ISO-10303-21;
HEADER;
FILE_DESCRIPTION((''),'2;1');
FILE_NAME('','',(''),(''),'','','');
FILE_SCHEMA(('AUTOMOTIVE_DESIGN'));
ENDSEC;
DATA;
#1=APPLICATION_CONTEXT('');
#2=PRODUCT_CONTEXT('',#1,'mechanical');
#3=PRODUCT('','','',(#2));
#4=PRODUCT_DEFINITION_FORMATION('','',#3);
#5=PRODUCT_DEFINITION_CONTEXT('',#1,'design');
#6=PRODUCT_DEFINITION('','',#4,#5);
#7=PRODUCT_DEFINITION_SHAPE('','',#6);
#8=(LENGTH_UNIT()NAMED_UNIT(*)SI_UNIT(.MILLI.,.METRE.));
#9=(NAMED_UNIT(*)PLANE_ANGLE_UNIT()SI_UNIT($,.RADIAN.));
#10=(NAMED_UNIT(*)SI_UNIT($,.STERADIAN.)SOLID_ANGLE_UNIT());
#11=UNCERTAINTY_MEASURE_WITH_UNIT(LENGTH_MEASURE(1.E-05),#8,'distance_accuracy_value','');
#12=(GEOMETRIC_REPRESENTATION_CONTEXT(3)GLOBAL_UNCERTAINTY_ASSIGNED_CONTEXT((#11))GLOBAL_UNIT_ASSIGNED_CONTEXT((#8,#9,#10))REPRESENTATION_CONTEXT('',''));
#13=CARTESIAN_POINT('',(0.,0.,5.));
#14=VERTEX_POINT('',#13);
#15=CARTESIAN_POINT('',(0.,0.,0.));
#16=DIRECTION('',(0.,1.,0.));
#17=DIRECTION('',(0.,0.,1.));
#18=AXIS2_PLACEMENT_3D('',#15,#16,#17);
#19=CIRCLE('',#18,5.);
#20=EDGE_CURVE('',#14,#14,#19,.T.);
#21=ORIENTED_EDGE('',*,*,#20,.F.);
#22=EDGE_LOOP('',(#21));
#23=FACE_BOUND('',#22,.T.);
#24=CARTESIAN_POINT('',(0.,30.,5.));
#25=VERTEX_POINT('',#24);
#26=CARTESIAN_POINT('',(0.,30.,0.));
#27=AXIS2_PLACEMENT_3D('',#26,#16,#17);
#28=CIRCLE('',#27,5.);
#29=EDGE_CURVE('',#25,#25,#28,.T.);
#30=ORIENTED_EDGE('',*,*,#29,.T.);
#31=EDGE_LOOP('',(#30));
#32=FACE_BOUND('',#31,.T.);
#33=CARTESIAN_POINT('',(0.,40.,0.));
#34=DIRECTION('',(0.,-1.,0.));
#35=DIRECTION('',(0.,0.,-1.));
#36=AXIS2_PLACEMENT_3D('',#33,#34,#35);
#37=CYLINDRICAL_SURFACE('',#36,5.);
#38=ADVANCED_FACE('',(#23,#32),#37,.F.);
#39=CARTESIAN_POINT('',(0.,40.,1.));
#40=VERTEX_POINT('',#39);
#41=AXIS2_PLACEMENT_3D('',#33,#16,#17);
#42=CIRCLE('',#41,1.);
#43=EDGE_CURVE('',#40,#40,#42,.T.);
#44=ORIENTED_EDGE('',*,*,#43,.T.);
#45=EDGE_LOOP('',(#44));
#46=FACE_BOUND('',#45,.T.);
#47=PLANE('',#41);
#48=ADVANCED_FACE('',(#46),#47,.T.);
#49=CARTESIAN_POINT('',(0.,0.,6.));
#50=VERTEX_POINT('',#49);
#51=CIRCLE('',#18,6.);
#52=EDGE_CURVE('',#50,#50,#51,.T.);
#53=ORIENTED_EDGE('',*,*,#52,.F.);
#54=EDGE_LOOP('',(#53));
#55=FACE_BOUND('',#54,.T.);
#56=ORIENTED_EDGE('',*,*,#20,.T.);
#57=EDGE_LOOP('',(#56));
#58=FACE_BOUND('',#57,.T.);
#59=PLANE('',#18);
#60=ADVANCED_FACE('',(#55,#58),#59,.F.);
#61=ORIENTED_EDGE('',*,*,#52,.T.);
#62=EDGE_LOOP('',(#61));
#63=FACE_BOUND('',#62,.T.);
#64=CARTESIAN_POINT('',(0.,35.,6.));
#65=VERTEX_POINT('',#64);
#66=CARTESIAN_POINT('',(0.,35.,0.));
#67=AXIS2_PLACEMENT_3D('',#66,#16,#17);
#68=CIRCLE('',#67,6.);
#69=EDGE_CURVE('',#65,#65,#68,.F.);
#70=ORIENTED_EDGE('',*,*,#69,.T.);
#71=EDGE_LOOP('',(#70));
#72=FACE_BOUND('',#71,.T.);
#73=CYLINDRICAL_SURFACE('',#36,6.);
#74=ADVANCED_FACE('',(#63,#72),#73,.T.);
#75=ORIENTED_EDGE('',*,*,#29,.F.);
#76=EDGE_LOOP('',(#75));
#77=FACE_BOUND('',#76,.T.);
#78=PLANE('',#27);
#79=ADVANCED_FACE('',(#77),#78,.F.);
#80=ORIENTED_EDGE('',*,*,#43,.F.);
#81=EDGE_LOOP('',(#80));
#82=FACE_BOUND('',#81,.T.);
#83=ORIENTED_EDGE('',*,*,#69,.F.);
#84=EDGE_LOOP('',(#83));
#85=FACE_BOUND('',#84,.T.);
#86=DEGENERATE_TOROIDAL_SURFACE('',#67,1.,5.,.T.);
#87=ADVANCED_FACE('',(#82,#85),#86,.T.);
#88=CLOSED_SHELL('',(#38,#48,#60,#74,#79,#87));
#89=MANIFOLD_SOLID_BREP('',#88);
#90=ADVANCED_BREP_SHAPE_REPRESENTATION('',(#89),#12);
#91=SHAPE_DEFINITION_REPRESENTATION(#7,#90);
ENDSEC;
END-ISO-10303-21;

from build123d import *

# Parameters (mm, degrees)
SKETCH1_R           = 6
BOSS_EXTRUDE1_DEPTH = 40
FILLET2_R           = 5
SHELL1_OUTLINE_R    = 5
SHELL1_DEPTH        = 30


# Read off the part's stored shape, not the designer's step: Shell1
with BuildPart() as part:
    # Sketch1 → Boss-Extrude1 (new body)
    with BuildSketch(Plane(origin=(0, 0, 0), x_dir=(1, 0, 0), z_dir=(0, 1, 0))):
        with Locations(Location((0, 0, 0), (0, 0, 270))):
            Circle(SKETCH1_R)
    extrude(amount=BOSS_EXTRUDE1_DEPTH)

    # Fillet2
    fillet2_edges = [part.edges().sort_by_distance(p)[0] for p in [
        (0, 40, -6),
    ]]
    fillet(fillet2_edges, radius=FILLET2_R)

    # Shell1 outline → Shell1 (cut)
    with BuildSketch(Plane(origin=(0, 0, 0), x_dir=(1, 0, 0), z_dir=(0, 1, 0))):
        Circle(SHELL1_OUTLINE_R)
    extrude(amount=SHELL1_DEPTH, mode=Mode.SUBTRACT)


solid = part.part
